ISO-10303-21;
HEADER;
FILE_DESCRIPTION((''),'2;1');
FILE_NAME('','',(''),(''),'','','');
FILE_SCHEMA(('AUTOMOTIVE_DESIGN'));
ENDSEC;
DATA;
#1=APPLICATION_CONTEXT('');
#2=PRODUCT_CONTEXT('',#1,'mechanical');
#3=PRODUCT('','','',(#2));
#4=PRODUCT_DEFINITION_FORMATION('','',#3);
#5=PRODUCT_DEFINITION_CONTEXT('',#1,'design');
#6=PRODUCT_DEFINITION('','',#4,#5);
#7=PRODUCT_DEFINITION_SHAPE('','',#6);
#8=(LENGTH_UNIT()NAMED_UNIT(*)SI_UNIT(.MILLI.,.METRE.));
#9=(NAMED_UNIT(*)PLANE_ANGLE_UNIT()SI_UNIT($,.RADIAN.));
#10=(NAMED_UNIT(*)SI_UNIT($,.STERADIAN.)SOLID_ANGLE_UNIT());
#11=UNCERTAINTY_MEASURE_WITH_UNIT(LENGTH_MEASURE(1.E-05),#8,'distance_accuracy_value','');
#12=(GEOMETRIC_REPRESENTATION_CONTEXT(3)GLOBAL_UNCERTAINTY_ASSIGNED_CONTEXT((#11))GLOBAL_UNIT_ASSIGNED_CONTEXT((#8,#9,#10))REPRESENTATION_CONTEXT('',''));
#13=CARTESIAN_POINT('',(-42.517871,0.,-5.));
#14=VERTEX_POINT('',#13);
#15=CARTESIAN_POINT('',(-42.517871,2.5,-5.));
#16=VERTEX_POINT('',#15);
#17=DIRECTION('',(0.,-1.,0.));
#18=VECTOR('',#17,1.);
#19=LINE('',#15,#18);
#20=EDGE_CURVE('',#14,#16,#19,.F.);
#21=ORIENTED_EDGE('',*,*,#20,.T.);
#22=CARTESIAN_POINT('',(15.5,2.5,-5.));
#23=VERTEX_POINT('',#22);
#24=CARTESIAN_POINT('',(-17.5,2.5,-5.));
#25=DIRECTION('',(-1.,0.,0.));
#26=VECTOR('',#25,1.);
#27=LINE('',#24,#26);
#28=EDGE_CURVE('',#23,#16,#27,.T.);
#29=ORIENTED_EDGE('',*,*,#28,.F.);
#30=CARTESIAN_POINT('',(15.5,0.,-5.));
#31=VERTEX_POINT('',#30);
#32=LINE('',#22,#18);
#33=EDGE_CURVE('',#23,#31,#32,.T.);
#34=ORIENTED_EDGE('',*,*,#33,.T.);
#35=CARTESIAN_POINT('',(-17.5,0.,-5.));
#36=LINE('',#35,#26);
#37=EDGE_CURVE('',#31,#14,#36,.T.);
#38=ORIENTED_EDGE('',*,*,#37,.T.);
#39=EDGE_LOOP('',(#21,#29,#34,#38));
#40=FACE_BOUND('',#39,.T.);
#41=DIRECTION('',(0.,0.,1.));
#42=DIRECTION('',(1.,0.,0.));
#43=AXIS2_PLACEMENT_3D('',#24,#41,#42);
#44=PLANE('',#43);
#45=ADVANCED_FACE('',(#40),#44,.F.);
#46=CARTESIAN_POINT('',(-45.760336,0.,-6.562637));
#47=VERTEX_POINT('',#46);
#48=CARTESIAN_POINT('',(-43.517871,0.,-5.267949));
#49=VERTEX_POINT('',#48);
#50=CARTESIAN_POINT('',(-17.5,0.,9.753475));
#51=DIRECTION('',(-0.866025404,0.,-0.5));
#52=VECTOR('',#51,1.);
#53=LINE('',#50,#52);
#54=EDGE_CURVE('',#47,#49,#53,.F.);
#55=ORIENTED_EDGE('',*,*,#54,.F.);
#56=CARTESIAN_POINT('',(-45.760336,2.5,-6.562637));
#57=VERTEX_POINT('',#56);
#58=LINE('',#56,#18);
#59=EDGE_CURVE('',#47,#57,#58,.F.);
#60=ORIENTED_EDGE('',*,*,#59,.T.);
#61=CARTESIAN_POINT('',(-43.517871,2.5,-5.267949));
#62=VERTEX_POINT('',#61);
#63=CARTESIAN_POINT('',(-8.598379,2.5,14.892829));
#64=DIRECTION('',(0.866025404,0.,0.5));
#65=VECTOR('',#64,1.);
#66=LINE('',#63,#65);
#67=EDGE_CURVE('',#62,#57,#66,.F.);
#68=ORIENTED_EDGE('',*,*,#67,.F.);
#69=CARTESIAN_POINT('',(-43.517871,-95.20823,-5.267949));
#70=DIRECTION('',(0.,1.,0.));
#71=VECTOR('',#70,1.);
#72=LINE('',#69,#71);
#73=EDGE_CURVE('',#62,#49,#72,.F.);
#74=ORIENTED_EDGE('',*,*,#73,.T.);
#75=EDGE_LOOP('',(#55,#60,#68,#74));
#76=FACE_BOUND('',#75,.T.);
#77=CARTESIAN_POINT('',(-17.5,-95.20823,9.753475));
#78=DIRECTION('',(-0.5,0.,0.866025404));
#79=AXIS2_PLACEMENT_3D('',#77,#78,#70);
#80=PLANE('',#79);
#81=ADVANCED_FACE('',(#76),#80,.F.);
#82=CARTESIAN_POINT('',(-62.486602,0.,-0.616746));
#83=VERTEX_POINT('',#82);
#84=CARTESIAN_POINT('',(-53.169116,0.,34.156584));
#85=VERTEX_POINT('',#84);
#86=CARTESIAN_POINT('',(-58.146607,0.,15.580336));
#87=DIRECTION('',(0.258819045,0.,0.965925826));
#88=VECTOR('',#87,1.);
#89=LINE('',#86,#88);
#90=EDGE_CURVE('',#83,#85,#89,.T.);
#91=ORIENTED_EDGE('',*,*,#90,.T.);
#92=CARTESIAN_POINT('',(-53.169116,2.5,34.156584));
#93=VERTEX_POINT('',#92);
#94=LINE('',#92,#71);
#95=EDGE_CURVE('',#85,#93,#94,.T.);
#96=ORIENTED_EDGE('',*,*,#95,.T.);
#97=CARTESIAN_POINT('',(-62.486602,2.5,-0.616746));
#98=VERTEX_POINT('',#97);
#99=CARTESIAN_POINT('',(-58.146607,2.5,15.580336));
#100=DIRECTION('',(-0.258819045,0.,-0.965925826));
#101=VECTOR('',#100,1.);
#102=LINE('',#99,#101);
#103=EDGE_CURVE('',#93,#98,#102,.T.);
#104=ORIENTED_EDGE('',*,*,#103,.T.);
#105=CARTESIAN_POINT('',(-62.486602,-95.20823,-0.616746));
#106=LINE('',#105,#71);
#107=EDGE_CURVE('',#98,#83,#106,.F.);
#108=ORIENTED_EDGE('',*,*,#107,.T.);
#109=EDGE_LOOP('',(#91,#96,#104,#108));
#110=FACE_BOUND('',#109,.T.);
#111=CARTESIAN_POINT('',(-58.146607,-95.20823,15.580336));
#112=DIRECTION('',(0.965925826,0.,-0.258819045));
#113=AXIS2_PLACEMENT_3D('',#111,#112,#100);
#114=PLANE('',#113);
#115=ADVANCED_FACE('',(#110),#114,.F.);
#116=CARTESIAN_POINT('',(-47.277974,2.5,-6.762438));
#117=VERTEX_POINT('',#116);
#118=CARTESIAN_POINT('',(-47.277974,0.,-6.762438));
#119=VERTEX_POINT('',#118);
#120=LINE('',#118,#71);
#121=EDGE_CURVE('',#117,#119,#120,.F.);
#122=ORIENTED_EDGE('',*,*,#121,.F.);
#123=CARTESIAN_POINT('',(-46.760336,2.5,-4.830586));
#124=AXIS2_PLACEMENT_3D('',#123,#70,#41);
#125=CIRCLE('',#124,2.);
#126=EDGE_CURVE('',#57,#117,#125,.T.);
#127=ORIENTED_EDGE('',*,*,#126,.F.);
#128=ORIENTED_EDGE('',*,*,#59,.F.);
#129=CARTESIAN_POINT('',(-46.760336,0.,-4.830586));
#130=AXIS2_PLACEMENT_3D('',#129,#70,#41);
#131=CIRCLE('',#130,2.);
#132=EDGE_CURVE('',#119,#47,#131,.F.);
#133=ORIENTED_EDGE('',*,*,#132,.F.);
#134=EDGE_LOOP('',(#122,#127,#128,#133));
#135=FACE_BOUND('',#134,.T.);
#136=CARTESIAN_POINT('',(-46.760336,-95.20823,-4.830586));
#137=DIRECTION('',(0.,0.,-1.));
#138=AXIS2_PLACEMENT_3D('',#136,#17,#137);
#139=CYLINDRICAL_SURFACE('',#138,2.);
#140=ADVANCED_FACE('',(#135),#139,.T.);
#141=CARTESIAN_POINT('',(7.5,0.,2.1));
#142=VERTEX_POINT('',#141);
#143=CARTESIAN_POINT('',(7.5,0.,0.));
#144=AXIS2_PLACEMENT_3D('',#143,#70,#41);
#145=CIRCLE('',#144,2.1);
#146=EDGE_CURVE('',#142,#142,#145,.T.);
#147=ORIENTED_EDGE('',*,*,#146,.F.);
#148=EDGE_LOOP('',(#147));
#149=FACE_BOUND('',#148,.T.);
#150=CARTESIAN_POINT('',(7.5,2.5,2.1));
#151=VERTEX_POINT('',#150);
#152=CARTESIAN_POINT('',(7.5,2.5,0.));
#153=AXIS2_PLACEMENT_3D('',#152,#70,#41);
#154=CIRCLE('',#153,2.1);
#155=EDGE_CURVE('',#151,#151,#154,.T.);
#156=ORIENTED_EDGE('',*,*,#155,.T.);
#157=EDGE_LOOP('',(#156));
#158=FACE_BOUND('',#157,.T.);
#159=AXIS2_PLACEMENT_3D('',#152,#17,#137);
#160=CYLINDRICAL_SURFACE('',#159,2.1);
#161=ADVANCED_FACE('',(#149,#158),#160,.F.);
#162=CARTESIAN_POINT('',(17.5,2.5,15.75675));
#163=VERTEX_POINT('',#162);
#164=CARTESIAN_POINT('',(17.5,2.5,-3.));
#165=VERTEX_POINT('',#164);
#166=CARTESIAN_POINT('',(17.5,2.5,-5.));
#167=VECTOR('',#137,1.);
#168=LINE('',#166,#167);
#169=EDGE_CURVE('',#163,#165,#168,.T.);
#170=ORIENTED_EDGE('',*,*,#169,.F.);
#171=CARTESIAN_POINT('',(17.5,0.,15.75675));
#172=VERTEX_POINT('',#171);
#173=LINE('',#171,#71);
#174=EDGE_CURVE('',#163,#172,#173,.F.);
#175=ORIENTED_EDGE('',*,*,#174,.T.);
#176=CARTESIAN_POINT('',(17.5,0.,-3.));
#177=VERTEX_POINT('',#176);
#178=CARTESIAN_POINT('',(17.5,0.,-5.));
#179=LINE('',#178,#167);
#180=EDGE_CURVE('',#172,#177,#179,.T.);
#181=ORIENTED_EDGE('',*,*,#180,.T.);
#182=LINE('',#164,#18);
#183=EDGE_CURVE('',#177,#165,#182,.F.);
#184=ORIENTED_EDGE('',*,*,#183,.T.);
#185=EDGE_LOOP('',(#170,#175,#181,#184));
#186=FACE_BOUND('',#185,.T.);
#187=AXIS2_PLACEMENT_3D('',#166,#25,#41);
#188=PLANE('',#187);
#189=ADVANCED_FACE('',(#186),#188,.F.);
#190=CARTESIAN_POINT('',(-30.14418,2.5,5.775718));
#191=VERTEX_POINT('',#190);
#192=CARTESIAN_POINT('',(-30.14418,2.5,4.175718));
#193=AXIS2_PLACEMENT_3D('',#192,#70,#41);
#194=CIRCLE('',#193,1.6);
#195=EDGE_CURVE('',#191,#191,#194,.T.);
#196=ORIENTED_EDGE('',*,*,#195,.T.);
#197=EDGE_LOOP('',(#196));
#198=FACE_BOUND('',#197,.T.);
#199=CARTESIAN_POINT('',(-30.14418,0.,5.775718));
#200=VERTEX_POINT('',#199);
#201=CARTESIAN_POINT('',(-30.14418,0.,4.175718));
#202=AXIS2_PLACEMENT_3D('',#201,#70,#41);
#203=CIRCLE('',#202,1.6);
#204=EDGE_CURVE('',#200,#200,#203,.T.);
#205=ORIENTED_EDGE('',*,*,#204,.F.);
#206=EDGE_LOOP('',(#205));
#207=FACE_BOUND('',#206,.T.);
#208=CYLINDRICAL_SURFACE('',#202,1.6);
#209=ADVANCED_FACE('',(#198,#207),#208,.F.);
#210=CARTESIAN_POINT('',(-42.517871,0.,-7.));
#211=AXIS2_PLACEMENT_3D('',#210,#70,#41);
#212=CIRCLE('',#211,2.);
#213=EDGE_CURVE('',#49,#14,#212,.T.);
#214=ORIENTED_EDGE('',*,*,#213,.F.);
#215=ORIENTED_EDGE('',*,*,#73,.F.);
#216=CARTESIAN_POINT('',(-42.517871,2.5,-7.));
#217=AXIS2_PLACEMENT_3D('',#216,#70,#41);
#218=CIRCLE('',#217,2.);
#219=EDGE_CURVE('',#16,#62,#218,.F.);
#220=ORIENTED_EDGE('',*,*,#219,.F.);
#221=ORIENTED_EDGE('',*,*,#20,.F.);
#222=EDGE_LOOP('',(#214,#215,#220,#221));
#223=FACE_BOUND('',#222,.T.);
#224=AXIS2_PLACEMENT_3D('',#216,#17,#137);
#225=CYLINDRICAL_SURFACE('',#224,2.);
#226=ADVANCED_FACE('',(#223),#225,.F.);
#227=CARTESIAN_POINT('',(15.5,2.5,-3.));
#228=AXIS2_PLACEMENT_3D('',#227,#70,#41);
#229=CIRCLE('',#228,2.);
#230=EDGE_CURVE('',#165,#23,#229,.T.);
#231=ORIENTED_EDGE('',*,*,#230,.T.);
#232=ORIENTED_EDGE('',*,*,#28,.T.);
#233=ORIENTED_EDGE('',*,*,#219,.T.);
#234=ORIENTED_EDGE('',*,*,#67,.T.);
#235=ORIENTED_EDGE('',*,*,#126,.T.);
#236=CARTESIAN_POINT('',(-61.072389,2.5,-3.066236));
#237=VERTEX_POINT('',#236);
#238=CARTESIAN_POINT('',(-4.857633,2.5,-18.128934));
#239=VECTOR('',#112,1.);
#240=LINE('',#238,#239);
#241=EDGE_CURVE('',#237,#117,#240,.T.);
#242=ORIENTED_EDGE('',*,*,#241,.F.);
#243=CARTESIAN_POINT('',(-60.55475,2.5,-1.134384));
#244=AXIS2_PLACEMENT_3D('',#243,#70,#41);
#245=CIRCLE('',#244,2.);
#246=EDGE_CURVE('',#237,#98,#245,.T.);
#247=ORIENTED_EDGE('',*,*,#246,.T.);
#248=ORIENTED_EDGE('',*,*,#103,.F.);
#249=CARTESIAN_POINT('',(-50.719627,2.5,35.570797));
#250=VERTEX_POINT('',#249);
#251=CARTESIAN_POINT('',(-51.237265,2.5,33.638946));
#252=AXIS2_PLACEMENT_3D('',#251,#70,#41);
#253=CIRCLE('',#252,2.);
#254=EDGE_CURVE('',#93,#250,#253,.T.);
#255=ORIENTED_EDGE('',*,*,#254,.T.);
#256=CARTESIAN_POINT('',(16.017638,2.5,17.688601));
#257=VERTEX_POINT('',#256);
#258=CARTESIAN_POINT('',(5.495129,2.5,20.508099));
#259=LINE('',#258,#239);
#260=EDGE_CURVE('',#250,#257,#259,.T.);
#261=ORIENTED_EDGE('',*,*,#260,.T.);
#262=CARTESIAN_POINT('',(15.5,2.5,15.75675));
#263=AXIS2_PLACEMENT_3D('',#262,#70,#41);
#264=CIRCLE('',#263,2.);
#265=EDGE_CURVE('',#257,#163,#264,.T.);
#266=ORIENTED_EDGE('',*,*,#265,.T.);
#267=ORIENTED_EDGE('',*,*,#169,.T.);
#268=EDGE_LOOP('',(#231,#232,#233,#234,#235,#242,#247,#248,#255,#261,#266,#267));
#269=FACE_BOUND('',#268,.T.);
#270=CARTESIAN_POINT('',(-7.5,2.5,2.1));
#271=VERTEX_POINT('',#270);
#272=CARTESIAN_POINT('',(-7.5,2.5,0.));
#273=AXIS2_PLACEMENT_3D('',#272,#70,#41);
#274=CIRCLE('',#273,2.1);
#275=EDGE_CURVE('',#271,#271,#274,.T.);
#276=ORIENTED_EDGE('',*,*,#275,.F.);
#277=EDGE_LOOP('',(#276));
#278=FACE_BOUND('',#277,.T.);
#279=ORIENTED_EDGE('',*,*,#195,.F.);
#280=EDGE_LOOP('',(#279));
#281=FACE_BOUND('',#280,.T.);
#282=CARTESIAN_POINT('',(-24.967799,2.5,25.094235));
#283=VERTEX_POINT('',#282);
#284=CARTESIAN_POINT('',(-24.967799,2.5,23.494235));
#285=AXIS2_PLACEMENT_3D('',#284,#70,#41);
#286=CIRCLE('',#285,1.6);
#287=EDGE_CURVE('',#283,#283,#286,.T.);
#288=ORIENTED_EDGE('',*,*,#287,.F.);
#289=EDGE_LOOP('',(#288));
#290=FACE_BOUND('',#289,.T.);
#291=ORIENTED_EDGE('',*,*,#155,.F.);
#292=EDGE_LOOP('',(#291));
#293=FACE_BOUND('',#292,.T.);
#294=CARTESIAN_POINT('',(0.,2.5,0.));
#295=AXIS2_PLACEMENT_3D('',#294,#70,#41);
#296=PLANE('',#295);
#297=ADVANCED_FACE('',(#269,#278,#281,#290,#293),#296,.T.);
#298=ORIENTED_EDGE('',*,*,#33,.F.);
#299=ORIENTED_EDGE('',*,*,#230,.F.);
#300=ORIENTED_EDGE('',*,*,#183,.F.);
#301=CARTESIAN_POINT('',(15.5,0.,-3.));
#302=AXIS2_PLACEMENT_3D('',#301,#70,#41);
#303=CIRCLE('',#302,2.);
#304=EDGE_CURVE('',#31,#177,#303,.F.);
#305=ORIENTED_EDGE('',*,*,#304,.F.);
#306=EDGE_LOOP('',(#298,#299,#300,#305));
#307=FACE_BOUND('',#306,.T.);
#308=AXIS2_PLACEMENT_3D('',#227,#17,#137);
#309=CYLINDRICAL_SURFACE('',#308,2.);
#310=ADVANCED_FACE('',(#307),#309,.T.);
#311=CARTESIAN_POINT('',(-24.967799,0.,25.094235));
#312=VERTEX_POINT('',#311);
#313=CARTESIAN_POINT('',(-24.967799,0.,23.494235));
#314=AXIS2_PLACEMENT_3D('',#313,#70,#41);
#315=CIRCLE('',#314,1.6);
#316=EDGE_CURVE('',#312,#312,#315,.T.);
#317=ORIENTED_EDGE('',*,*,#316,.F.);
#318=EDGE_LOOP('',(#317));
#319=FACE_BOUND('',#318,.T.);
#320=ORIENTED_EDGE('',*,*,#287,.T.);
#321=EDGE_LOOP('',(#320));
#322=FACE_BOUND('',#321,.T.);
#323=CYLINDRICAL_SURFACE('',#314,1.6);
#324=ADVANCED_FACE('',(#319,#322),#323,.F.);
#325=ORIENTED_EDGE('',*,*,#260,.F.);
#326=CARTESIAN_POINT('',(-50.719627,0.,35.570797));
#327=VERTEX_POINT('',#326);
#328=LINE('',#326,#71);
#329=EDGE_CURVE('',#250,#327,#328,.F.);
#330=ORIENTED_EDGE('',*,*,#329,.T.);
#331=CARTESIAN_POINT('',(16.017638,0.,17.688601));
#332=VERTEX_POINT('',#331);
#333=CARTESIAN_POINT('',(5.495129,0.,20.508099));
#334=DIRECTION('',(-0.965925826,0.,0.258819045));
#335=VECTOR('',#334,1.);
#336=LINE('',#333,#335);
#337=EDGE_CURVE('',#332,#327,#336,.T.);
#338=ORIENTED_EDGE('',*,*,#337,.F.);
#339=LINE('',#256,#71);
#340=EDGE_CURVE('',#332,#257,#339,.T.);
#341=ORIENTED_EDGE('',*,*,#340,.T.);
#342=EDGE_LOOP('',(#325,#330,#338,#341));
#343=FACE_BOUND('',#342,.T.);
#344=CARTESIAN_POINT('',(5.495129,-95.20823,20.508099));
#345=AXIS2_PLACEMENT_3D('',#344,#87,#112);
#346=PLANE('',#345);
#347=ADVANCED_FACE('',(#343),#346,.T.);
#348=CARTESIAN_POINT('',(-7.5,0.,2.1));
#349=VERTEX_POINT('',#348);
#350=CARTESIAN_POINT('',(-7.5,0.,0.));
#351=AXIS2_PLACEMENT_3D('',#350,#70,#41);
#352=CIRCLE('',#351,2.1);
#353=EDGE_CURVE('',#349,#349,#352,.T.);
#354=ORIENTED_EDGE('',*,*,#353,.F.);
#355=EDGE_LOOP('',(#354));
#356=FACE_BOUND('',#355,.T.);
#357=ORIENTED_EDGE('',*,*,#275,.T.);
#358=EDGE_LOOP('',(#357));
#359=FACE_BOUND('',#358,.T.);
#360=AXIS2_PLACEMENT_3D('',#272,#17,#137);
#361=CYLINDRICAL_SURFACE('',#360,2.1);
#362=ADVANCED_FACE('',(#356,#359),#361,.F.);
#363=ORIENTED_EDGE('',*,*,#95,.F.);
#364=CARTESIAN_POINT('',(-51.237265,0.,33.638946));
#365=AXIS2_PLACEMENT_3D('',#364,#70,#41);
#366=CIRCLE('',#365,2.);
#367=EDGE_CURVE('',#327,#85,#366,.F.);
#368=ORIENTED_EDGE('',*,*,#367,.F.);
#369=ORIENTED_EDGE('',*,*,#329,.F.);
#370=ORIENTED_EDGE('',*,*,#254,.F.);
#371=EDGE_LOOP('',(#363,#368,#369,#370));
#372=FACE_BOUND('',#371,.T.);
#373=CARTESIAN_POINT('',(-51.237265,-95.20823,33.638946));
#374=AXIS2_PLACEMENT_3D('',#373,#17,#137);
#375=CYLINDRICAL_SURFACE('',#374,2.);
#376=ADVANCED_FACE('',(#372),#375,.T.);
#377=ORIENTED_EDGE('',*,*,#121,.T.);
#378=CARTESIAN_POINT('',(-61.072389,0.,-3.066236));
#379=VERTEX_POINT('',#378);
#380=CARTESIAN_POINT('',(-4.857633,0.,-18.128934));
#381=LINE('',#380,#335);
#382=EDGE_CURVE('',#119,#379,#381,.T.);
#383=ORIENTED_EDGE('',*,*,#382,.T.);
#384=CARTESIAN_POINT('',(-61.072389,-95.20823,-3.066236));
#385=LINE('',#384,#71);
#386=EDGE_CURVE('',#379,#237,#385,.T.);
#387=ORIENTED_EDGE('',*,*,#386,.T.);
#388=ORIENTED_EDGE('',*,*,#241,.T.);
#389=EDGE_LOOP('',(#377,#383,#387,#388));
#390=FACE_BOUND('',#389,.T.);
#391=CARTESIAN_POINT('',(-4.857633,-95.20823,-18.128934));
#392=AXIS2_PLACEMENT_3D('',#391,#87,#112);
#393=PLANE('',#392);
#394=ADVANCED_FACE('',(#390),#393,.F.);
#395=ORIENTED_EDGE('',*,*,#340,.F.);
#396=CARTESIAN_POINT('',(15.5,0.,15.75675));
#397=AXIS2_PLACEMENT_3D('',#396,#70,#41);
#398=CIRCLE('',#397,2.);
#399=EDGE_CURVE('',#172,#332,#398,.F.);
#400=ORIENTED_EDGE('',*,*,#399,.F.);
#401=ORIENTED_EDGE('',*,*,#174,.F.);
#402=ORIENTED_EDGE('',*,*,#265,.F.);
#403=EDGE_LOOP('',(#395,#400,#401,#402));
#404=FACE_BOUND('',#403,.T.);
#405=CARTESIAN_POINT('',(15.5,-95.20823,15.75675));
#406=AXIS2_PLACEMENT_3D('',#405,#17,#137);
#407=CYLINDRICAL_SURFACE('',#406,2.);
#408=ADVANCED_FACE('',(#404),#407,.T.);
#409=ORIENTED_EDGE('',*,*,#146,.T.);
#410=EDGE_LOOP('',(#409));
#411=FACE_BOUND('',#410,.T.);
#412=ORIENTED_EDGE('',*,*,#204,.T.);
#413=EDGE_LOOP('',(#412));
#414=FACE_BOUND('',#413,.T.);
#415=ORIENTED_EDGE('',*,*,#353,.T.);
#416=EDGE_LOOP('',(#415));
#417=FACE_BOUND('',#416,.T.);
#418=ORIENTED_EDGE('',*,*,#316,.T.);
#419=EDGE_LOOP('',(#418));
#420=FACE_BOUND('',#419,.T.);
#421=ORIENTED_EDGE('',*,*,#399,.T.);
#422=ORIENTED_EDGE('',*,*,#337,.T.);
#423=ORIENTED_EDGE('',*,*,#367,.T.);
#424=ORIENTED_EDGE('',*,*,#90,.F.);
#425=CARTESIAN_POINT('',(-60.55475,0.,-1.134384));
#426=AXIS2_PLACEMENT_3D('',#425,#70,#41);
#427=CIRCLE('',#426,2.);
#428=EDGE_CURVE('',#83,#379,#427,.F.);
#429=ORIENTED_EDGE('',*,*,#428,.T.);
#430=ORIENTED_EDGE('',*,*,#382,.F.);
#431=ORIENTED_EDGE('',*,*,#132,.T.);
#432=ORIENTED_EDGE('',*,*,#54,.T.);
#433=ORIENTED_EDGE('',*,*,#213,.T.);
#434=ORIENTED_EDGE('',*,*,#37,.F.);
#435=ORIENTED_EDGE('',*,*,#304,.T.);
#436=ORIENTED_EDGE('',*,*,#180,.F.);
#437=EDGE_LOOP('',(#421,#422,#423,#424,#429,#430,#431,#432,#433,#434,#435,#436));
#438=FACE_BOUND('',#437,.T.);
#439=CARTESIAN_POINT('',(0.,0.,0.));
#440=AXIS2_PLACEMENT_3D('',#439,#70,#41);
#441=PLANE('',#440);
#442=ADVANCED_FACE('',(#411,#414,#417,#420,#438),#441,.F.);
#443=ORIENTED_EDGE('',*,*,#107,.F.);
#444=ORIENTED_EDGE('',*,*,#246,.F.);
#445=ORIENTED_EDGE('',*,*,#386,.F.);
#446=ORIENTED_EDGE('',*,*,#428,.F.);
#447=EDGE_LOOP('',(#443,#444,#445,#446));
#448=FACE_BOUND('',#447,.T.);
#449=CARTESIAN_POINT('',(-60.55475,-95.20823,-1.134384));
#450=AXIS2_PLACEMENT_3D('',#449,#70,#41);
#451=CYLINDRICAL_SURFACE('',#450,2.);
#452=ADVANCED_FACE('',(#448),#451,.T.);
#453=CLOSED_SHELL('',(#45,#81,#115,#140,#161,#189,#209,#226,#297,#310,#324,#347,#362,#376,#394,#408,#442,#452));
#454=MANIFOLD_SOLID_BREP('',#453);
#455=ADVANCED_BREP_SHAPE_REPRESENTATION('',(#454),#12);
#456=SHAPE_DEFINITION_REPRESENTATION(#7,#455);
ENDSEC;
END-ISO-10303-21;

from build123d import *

# Parameters (mm, degrees)
SKETCH_1_W          = 35
SKETCH_1_H          = 10
SKETCH_1_R          = 2.1
EXTRUDE_1_DEPTH     = 2.5
EXTRUDE_2_DEPTH     = 2.5
SKETCH_2_3_R        = 1.6
CUT_EXTRUDE_1_DEPTH = 73.650942584
CHAMFER_1_SIZE      = 24.494897428
CHAMFER_1_SIZE_2    = 30
FILLET_1_R          = 2


with BuildPart() as part:
    # 草图1 → 凸台-拉伸1 (new body)
    with BuildSketch(Plane(origin=(0, 0, 0), x_dir=(1, 0, 0), z_dir=(0, 1, 0))):
        Rectangle(SKETCH_1_W, SKETCH_1_H)
        with Locations(Location((-7.5, 0, 0), (0, 0, 270))):
            Circle(SKETCH_1_R, mode=Mode.SUBTRACT)
        with Locations(Location((7.5, 0, 0), (0, 0, 270))):
            Circle(SKETCH_1_R, mode=Mode.SUBTRACT)
    extrude(amount=EXTRUDE_1_DEPTH)

    # 草图2 → 凸台-拉伸2 (add)
    with BuildSketch(Plane(origin=(0, 2.5, 0), x_dir=(1, 0, 0), z_dir=(0, 1, 0))):
        Polygon((-63.004240202, 2.548597579), (-52.651478398, -36.088435473), (17.5, -17.291403488), (17.5, -5), (-17.5, -5), (-17.5, 14.741421993), align=None)
    extrude(amount=-EXTRUDE_2_DEPTH)

    # 草图2<3> → 切除-拉伸1 (cut, through all)
    with BuildSketch(Plane(origin=(0, 2.5, 0), x_dir=(1, 0, 0), z_dir=(0, 1, 0))):
        with Locations(Location((-30.144179737, -4.175718463, 0), (0, 0, 270))):
            Circle(SKETCH_2_3_R)
        with Locations(Location((-24.967798835, -23.494234988, 0), (0, 0, 270))):
            Circle(SKETCH_2_3_R)
    extrude(amount=-CUT_EXTRUDE_1_DEPTH, mode=Mode.SUBTRACT)

    # 倒角1
    # the kernel refuses this chamfer: 30, 24.494897428 mm, written as the material it takes off along each edge
    with BuildSketch(Plane(origin=(-17.5, 79.650489639, -14.741421993), x_dir=(0.04137655931612181, 0, 0.999143623479207), z_dir=(0, -1, 0))) as chamfer_1_piece_1_section:
        Polygon((CHAMFER_1_SIZE * 0.999143623472, CHAMFER_1_SIZE * 0.0413765593158), (CHAMFER_1_SIZE_2 * 0.218630711303, CHAMFER_1_SIZE_2 * 0.975807671662), (0, 0), align=None)
    chamfer_1_piece_1 = extrude(amount=156.800979278, mode=Mode.PRIVATE)
    chamfer_1_piece_1 = split(chamfer_1_piece_1, bisect_by=Plane(origin=(-28.937603514, 1.25, -5), z_dir=(0, 0, -1)), keep=Keep.TOP, mode=Mode.PRIVATE)
    add(chamfer_1_piece_1, mode=Mode.SUBTRACT)

    # 圆角1
    fillet_1_edges = [part.edges().sort_by_distance(p)[0] for p in [
        (17.5, 1.25, 17.291403488),
        (-52.651478398, 1.25, 36.088435473),
        (-63.004240202, 1.25, -2.548597579),
        (-46.477774789, 1.25, -6.97685064),
        (-43.053769041, 1.25, -5),
        (17.5, 1.25, -5),
    ]]
    fillet(fillet_1_edges, radius=FILLET_1_R)


solid = part.part
